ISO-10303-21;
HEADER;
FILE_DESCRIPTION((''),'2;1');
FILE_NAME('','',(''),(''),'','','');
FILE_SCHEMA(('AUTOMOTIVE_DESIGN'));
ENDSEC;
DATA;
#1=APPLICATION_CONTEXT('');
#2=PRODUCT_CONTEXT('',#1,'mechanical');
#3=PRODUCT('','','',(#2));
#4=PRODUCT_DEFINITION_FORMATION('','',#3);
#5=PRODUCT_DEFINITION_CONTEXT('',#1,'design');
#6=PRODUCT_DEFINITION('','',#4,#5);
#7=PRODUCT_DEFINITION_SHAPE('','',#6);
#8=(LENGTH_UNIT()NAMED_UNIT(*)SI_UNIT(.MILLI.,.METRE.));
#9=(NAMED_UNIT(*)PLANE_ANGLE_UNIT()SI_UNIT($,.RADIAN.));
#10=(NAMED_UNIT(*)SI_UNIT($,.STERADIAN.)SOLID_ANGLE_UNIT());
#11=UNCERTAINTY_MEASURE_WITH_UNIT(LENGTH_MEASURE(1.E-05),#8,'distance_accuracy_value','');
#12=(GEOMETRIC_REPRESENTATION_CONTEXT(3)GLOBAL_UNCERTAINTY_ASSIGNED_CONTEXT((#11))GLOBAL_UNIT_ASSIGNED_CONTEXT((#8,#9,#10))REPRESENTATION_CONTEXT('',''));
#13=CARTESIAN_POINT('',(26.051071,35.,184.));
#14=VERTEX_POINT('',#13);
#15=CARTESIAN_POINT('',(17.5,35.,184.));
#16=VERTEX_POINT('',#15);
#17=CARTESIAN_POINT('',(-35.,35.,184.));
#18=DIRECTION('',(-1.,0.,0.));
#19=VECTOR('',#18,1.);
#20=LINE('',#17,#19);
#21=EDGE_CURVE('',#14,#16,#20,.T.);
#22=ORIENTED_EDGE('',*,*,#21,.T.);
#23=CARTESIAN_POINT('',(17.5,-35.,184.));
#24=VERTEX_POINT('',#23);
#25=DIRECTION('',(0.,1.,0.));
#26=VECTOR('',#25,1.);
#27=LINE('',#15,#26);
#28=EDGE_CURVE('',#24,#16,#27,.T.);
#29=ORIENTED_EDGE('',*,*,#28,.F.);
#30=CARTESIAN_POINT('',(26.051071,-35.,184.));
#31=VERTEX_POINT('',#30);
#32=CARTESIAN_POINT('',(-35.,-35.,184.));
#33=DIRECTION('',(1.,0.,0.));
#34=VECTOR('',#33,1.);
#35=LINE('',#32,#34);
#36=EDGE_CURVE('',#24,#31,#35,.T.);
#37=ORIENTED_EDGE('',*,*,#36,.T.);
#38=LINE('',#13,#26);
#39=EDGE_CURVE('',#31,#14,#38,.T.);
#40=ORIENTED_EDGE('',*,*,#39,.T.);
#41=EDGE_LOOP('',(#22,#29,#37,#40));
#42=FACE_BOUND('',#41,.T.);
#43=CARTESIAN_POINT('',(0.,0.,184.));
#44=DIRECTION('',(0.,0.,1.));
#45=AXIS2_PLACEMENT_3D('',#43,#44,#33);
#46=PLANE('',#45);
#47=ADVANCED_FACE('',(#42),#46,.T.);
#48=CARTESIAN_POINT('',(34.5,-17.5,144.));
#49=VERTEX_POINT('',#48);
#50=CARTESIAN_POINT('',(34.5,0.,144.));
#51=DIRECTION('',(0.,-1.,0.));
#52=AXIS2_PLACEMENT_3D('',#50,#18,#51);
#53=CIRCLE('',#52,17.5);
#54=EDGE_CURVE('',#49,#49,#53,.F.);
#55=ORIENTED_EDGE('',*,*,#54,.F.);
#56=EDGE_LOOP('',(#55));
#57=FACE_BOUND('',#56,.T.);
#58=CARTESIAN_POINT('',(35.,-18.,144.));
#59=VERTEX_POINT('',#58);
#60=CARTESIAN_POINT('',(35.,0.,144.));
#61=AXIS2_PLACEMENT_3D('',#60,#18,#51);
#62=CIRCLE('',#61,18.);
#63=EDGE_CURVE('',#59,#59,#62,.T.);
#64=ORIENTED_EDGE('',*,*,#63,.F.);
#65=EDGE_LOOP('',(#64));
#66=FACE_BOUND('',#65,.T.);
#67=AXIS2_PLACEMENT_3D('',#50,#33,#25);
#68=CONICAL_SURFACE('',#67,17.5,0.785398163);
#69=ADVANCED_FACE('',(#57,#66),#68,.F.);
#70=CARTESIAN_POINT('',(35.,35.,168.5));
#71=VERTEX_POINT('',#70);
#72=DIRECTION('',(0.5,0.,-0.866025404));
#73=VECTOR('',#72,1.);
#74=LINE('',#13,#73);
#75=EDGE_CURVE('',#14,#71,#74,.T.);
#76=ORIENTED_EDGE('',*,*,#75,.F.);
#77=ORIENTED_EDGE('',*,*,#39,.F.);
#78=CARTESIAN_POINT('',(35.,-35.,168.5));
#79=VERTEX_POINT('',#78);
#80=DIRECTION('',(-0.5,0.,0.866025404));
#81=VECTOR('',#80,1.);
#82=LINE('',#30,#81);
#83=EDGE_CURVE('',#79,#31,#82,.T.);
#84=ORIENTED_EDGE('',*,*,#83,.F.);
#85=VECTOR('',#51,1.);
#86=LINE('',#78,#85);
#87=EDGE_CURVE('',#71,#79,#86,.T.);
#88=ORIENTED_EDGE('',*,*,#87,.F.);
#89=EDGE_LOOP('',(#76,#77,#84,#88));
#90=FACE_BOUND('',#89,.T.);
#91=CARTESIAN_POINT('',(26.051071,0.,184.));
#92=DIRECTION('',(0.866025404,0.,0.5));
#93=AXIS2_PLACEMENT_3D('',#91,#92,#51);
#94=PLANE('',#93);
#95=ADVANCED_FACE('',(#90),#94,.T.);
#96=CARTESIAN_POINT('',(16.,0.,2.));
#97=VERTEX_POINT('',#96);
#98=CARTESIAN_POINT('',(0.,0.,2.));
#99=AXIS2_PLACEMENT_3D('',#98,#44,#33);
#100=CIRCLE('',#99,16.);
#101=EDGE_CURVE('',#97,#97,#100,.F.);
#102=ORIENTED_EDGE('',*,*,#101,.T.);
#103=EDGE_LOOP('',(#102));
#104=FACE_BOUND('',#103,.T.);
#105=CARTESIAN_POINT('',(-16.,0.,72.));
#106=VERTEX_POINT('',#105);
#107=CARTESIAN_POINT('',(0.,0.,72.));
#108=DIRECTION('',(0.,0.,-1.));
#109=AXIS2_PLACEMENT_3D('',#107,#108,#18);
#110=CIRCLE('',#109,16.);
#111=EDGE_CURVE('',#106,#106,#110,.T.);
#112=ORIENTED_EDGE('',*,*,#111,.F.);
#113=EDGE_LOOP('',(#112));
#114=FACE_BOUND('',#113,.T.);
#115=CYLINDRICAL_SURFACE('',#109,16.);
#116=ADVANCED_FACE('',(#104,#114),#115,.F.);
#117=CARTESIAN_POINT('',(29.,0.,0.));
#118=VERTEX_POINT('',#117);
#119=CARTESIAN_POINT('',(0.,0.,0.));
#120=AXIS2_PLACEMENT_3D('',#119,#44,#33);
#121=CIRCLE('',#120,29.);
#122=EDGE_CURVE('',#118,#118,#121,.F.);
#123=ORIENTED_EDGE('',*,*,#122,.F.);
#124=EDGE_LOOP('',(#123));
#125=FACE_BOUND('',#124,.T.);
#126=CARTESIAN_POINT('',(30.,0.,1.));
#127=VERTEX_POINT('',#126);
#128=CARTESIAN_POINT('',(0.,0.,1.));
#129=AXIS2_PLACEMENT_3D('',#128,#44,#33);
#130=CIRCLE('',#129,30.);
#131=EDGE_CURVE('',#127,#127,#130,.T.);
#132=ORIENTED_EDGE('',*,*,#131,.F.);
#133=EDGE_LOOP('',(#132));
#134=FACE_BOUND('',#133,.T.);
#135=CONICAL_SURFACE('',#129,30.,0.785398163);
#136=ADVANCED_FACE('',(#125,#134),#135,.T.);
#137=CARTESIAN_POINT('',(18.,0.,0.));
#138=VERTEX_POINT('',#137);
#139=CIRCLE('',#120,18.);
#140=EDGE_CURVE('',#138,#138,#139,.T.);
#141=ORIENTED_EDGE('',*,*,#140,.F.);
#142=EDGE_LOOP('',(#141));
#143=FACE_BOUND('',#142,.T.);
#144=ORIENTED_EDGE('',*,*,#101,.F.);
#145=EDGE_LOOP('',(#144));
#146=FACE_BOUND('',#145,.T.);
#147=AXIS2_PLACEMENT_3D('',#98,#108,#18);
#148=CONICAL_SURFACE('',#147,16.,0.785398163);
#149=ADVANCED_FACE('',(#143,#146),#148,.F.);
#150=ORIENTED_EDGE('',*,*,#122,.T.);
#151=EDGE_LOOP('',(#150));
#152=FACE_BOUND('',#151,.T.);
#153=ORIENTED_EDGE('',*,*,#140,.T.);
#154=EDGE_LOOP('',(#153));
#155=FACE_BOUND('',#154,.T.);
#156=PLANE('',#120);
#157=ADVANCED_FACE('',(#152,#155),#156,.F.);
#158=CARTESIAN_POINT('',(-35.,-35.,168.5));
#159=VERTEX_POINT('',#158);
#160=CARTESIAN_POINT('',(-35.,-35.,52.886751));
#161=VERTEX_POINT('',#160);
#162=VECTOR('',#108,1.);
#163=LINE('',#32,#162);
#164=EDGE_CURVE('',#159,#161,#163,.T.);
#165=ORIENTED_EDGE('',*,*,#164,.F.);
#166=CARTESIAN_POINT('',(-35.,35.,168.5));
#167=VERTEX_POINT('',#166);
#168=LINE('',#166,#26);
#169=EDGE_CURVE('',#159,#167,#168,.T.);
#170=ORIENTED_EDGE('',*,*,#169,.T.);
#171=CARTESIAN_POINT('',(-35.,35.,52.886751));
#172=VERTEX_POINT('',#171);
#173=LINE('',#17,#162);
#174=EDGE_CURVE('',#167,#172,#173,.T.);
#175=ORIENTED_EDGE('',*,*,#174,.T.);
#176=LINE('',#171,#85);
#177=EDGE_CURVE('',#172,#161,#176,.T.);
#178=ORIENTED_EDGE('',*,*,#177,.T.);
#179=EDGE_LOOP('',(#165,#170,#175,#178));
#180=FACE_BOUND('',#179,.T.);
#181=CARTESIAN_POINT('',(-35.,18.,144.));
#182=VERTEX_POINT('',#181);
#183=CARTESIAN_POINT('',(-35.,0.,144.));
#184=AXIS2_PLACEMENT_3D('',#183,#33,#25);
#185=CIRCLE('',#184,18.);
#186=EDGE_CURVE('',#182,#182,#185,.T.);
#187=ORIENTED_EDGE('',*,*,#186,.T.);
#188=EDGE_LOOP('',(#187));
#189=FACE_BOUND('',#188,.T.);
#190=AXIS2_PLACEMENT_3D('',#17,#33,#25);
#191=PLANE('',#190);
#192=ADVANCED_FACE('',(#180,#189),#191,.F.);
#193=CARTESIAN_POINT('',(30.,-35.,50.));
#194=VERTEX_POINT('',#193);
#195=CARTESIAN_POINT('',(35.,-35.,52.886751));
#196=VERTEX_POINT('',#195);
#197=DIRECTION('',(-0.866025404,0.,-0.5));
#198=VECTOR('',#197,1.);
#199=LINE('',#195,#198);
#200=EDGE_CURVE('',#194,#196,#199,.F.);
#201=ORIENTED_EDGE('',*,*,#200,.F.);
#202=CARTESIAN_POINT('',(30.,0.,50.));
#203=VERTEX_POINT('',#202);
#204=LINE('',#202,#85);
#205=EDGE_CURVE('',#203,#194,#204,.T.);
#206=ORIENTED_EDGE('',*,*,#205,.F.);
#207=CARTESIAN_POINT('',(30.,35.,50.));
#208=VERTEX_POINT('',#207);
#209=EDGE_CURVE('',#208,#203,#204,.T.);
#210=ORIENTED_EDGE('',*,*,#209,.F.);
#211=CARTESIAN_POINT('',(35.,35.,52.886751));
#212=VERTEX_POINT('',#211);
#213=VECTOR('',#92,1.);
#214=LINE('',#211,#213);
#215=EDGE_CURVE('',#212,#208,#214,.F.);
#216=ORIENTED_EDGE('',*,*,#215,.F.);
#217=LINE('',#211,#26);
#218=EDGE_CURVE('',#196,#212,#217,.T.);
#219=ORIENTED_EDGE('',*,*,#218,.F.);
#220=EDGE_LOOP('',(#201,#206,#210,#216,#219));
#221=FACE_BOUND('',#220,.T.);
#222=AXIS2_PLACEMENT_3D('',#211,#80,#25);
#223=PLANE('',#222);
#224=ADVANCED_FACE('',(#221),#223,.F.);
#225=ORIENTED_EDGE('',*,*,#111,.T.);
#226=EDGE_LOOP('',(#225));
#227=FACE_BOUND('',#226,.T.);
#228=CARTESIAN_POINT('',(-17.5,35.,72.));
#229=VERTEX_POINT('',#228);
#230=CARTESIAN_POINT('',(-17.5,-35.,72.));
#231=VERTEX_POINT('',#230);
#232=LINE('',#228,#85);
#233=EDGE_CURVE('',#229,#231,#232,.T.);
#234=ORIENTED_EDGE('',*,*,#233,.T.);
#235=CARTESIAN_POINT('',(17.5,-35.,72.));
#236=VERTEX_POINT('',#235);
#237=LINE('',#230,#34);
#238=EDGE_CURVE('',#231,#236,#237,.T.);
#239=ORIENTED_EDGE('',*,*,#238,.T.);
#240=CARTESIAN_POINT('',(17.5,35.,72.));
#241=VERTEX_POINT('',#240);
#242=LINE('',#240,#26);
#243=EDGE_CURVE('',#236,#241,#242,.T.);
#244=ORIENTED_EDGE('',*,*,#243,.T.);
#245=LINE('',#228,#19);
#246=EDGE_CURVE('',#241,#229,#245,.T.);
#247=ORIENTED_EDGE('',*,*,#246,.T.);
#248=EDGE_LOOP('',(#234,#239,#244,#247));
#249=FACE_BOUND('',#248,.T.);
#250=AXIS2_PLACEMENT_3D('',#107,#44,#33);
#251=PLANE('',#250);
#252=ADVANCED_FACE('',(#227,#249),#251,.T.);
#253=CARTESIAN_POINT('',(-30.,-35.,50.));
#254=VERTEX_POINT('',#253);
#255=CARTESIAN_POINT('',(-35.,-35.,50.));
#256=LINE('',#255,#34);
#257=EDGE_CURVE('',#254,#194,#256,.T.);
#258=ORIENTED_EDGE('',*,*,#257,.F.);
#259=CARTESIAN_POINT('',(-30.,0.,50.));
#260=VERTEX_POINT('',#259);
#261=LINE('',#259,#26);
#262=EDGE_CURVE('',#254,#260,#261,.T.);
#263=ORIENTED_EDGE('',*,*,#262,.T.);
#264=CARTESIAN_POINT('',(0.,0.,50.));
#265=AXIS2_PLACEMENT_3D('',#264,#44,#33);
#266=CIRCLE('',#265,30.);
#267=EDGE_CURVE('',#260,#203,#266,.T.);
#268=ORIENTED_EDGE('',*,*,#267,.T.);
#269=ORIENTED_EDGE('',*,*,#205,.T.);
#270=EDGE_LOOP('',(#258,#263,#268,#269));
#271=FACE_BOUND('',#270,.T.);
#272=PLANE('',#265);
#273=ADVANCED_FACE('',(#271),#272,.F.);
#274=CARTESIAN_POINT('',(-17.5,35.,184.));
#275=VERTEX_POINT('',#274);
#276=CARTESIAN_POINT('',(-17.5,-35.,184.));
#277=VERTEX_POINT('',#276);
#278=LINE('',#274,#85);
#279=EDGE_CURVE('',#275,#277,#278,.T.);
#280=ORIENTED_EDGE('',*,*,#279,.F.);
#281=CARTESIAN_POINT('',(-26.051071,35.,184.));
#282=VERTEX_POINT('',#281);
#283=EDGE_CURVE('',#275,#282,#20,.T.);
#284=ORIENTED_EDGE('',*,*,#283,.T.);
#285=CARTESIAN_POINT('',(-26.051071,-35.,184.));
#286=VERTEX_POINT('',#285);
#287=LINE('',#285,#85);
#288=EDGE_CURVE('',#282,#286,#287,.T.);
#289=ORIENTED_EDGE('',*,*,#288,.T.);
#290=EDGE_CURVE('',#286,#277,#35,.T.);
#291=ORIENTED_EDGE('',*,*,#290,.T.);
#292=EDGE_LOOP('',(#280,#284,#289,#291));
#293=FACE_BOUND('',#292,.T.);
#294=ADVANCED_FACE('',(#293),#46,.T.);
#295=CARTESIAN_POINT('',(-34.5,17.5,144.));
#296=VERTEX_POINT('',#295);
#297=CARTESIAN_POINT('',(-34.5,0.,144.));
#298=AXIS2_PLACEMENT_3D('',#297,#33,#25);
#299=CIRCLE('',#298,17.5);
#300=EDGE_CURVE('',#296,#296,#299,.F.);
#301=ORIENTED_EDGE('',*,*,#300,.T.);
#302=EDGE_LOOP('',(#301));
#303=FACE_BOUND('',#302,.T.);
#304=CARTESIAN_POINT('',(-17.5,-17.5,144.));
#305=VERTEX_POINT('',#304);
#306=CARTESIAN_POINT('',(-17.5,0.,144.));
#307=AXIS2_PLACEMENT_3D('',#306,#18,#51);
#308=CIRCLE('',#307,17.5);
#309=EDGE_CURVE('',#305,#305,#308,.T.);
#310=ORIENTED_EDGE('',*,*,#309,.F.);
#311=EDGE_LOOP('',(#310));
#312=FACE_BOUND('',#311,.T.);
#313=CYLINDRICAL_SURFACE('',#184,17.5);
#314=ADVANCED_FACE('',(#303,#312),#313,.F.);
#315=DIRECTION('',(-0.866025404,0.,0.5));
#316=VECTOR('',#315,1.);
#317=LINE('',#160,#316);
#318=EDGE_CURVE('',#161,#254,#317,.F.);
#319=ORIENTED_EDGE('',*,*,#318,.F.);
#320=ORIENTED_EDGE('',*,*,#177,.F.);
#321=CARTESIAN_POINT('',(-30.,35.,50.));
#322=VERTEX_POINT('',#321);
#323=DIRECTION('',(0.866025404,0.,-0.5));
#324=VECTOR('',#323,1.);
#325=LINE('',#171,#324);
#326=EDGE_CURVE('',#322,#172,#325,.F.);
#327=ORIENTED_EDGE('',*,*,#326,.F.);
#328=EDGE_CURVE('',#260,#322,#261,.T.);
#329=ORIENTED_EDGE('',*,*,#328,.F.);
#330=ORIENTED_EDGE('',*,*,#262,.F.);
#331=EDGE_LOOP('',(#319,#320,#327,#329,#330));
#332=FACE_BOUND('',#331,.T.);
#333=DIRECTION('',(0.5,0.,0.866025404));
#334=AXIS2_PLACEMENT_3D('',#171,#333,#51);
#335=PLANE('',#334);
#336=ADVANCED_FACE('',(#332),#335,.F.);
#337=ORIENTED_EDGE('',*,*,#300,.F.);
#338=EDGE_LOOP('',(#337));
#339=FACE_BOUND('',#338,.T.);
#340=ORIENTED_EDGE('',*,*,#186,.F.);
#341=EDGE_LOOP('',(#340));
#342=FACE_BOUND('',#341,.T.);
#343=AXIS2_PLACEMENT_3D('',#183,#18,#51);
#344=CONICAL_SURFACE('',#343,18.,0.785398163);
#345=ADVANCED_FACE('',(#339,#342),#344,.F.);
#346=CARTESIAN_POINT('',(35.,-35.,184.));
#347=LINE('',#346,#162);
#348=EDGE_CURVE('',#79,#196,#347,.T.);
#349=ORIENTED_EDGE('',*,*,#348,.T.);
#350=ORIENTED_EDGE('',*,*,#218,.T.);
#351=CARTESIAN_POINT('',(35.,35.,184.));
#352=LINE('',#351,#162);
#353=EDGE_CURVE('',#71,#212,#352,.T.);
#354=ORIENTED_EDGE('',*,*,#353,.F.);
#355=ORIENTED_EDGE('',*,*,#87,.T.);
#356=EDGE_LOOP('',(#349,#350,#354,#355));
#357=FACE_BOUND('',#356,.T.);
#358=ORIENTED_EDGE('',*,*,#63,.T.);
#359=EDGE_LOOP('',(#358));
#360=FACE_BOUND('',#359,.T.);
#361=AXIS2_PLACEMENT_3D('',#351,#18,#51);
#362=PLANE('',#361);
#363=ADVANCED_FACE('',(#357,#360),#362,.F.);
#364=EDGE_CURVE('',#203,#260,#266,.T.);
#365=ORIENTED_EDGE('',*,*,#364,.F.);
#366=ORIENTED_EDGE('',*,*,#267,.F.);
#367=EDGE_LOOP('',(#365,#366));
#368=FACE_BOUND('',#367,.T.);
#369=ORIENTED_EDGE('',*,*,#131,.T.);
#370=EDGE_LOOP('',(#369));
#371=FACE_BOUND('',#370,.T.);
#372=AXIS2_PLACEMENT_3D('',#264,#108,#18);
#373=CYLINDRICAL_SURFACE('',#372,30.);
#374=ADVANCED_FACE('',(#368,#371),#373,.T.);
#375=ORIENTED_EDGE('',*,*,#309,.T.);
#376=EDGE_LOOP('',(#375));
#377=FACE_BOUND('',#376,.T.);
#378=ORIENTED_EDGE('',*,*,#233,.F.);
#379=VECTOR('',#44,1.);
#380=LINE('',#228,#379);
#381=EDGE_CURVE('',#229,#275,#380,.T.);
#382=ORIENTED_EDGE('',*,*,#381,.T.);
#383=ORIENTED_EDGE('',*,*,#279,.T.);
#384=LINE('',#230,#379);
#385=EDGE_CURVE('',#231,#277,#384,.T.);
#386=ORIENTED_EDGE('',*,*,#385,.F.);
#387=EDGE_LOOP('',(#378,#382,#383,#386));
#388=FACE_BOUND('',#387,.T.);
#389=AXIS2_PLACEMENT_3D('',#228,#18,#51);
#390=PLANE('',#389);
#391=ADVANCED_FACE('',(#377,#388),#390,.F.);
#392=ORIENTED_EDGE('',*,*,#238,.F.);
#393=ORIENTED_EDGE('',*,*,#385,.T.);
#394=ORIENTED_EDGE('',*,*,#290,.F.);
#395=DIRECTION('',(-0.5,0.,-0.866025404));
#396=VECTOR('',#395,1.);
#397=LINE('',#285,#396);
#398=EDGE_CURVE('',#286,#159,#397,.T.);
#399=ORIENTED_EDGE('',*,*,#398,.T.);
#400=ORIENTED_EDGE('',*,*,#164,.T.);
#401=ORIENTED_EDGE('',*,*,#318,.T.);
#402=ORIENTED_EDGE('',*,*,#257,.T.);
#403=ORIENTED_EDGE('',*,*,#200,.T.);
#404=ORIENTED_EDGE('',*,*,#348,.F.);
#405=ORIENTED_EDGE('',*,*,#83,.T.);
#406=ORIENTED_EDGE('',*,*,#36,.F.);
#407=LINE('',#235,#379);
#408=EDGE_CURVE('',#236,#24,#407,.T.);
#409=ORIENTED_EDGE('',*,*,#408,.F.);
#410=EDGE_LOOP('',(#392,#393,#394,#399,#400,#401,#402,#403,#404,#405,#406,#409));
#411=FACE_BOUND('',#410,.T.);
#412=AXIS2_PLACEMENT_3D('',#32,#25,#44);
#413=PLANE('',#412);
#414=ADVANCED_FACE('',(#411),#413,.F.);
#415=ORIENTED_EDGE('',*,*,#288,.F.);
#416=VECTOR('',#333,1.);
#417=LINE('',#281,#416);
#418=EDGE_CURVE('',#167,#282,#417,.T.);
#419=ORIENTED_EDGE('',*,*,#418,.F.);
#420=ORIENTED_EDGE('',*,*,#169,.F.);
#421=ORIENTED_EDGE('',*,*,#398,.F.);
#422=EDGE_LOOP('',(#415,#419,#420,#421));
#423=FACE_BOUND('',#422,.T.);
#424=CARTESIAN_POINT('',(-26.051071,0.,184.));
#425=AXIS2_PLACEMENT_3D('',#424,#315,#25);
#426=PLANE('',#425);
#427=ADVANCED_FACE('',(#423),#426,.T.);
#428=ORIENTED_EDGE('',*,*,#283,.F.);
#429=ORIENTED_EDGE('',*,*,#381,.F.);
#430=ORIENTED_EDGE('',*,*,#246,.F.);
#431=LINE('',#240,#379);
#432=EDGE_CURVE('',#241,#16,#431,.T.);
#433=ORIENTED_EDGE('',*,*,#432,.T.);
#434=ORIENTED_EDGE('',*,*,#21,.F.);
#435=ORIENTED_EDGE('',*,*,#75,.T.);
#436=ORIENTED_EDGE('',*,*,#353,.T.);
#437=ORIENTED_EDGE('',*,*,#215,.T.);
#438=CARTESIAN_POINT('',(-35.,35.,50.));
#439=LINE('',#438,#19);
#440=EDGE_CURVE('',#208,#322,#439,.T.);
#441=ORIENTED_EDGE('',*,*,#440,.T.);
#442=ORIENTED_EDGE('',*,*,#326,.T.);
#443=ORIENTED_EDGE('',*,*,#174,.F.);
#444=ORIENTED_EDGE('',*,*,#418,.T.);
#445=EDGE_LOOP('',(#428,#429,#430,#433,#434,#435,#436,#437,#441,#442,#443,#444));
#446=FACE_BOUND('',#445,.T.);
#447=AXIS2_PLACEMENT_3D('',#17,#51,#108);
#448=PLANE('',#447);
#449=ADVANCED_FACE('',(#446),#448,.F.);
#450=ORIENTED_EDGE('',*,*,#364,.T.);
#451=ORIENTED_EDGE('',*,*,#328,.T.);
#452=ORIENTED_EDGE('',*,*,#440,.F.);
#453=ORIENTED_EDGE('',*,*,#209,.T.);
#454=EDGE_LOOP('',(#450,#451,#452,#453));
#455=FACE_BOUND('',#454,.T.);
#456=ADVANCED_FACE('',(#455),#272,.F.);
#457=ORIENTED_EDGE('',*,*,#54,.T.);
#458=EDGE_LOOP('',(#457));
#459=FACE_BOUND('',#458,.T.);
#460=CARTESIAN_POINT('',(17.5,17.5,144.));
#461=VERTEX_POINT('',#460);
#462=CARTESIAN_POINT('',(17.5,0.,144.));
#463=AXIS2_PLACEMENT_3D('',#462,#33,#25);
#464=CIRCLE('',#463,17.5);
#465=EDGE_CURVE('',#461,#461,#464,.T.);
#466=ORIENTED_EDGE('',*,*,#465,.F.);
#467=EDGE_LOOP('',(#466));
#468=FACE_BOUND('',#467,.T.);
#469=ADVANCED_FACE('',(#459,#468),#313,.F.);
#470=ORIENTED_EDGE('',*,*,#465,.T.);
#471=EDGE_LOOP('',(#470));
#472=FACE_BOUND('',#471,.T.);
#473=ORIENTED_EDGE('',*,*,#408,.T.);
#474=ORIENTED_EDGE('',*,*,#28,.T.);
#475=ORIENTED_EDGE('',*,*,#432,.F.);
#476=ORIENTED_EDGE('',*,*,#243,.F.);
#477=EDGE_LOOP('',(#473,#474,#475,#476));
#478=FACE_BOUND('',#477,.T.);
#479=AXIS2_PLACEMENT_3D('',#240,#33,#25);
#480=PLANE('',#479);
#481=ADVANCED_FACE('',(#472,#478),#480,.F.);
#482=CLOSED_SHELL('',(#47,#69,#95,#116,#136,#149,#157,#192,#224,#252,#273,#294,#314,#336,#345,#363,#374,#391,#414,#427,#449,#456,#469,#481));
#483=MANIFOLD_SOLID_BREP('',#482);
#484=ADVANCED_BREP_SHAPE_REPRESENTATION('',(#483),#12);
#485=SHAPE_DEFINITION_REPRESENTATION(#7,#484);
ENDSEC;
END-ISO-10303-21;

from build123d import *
from OCP.BRepFilletAPI import BRepFilletAPI_MakeChamfer

# Parameters (mm, degrees)
SKETCH2_R           = 30
BOSS_EXTRUDE1_DEPTH = 50
SKETCH3_W           = 70
SKETCH3_H           = 70
BOSS_EXTRUDE2_DEPTH = 134
SKETCH4_W           = 35
SKETCH4_H           = 70
CUT_EXTRUDE1_DEPTH  = 112
SKETCH5_R           = 16
CUT_EXTRUDE2_DEPTH  = 72
CHAMFER1_SIZE       = 15.5
CHAMFER1_SIZE2      = 8.948929172
SKETCH6_R           = 17.5
CUT_EXTRUDE3_DEPTH  = 70
CHAMFER2_SIZE       = 0.5
CHAMFER4_SIZE       = 1
CHAMFER6_SIZE       = 2
CHAMFER7_SIZE       = 5
CHAMFER7_SIZE_2     = 2.886751346


with BuildPart() as part:
    # Sketch2 → Boss-Extrude1 (new body)
    with BuildSketch(Plane.XY):
        Circle(SKETCH2_R)
    extrude(amount=BOSS_EXTRUDE1_DEPTH)

    # Sketch3 → Boss-Extrude2 (add)
    with BuildSketch(Plane.XY.offset(50)):
        Rectangle(SKETCH3_W, SKETCH3_H)
    extrude(amount=BOSS_EXTRUDE2_DEPTH)

    # Sketch4 → Cut-Extrude1 (cut)
    with BuildSketch(Plane.XY.offset(184)):
        Rectangle(SKETCH4_W, SKETCH4_H)
    extrude(amount=-CUT_EXTRUDE1_DEPTH, mode=Mode.SUBTRACT)

    # Sketch5 → Cut-Extrude2 (cut)
    with BuildSketch(Plane(origin=(0, 0, 0), x_dir=(-1, 0, 0), z_dir=(0, 0, -1))):
        Circle(SKETCH5_R)
    extrude(amount=-CUT_EXTRUDE2_DEPTH, mode=Mode.SUBTRACT)

    # Chamfer1: one chamfer whose edges measure the first distance from different faces: ONE call of the kernel's chamfer builder (chamfer() names one face for all edges)
    chamfer1_edges_1 = [part.edges().sort_by_distance(p)[0] for p in [
        (-35, 0, 184),
    ]]
    chamfer1_side_1 = [part.faces().sort_by_distance(p)[0] for p in [
        (-35, 0, 117),
    ]]
    chamfer1_edges_2 = [part.edges().sort_by_distance(p)[0] for p in [
        (35, 0, 184),
    ]]
    chamfer1_side_2 = [part.faces().sort_by_distance(p)[0] for p in [
        (35, 0, 117),
    ]]
    chamfer1 = BRepFilletAPI_MakeChamfer(part.part.solid().wrapped)
    for e in chamfer1_edges_1:
        chamfer1.Add(CHAMFER1_SIZE, CHAMFER1_SIZE2, e.wrapped, chamfer1_side_1[0].wrapped)  # the first distance lies on this face
    for e in chamfer1_edges_2:
        chamfer1.Add(CHAMFER1_SIZE, CHAMFER1_SIZE2, e.wrapped, chamfer1_side_2[0].wrapped)  # the first distance lies on this face
    add(Compound.cast(chamfer1.Shape()), mode=Mode.REPLACE)

    # Sketch6 → Cut-Extrude3 (cut)
    with BuildSketch(Plane(origin=(35, 0, 0), x_dir=(0, 0, -1), z_dir=(1, 0, 0))):
        with Locations(Location((-144, 0, 0), (0, 0, 90))):
            Circle(SKETCH6_R)
    extrude(amount=-CUT_EXTRUDE3_DEPTH, mode=Mode.SUBTRACT)

    # Chamfer2
    chamfer2_edges = [part.edges().sort_by_distance(p)[0] for p in [
        (-35, -17.5, 144),
        (35, -17.5, 144),
    ]]
    chamfer(chamfer2_edges, length=CHAMFER2_SIZE)

    # Chamfer4
    chamfer4_edges = [part.edges().sort_by_distance(p)[0] for p in [
        (-30, 0, 0),
    ]]
    chamfer(chamfer4_edges, length=CHAMFER4_SIZE)

    # Chamfer6
    chamfer6_edges = [part.edges().sort_by_distance(p)[0] for p in [
        (16, 0, 0),
    ]]
    chamfer(chamfer6_edges, length=CHAMFER6_SIZE)

    # Chamfer7
    chamfer7_edges_1 = [part.edges().sort_by_distance(p)[0] for p in [
        (-35, 0, 50),
    ]]
    chamfer7_side_1 = [part.faces().sort_by_distance(p)[0] for p in [
        (-34.942264973, 0, 50),
    ]]
    chamfer7_edges_2 = [part.edges().sort_by_distance(p)[0] for p in [
        (35, 0, 50),
    ]]
    chamfer7_side_2 = [part.faces().sort_by_distance(p)[0] for p in [
        (34.942264973, 0, 50),
    ]]
    chamfer7 = BRepFilletAPI_MakeChamfer(part.part.solid().wrapped)
    for e in chamfer7_edges_1:
        chamfer7.Add(CHAMFER7_SIZE - 0.0001, CHAMFER7_SIZE_2 - 0.0001, e.wrapped, chamfer7_side_1[0].wrapped)
    for e in chamfer7_edges_2:
        chamfer7.Add(CHAMFER7_SIZE - 0.0001, CHAMFER7_SIZE_2 - 0.0001, e.wrapped, chamfer7_side_2[0].wrapped)
    add(Compound.cast(chamfer7.Shape()), mode=Mode.REPLACE)  # a hair under: the kernel refuses the full size


solid = part.part
